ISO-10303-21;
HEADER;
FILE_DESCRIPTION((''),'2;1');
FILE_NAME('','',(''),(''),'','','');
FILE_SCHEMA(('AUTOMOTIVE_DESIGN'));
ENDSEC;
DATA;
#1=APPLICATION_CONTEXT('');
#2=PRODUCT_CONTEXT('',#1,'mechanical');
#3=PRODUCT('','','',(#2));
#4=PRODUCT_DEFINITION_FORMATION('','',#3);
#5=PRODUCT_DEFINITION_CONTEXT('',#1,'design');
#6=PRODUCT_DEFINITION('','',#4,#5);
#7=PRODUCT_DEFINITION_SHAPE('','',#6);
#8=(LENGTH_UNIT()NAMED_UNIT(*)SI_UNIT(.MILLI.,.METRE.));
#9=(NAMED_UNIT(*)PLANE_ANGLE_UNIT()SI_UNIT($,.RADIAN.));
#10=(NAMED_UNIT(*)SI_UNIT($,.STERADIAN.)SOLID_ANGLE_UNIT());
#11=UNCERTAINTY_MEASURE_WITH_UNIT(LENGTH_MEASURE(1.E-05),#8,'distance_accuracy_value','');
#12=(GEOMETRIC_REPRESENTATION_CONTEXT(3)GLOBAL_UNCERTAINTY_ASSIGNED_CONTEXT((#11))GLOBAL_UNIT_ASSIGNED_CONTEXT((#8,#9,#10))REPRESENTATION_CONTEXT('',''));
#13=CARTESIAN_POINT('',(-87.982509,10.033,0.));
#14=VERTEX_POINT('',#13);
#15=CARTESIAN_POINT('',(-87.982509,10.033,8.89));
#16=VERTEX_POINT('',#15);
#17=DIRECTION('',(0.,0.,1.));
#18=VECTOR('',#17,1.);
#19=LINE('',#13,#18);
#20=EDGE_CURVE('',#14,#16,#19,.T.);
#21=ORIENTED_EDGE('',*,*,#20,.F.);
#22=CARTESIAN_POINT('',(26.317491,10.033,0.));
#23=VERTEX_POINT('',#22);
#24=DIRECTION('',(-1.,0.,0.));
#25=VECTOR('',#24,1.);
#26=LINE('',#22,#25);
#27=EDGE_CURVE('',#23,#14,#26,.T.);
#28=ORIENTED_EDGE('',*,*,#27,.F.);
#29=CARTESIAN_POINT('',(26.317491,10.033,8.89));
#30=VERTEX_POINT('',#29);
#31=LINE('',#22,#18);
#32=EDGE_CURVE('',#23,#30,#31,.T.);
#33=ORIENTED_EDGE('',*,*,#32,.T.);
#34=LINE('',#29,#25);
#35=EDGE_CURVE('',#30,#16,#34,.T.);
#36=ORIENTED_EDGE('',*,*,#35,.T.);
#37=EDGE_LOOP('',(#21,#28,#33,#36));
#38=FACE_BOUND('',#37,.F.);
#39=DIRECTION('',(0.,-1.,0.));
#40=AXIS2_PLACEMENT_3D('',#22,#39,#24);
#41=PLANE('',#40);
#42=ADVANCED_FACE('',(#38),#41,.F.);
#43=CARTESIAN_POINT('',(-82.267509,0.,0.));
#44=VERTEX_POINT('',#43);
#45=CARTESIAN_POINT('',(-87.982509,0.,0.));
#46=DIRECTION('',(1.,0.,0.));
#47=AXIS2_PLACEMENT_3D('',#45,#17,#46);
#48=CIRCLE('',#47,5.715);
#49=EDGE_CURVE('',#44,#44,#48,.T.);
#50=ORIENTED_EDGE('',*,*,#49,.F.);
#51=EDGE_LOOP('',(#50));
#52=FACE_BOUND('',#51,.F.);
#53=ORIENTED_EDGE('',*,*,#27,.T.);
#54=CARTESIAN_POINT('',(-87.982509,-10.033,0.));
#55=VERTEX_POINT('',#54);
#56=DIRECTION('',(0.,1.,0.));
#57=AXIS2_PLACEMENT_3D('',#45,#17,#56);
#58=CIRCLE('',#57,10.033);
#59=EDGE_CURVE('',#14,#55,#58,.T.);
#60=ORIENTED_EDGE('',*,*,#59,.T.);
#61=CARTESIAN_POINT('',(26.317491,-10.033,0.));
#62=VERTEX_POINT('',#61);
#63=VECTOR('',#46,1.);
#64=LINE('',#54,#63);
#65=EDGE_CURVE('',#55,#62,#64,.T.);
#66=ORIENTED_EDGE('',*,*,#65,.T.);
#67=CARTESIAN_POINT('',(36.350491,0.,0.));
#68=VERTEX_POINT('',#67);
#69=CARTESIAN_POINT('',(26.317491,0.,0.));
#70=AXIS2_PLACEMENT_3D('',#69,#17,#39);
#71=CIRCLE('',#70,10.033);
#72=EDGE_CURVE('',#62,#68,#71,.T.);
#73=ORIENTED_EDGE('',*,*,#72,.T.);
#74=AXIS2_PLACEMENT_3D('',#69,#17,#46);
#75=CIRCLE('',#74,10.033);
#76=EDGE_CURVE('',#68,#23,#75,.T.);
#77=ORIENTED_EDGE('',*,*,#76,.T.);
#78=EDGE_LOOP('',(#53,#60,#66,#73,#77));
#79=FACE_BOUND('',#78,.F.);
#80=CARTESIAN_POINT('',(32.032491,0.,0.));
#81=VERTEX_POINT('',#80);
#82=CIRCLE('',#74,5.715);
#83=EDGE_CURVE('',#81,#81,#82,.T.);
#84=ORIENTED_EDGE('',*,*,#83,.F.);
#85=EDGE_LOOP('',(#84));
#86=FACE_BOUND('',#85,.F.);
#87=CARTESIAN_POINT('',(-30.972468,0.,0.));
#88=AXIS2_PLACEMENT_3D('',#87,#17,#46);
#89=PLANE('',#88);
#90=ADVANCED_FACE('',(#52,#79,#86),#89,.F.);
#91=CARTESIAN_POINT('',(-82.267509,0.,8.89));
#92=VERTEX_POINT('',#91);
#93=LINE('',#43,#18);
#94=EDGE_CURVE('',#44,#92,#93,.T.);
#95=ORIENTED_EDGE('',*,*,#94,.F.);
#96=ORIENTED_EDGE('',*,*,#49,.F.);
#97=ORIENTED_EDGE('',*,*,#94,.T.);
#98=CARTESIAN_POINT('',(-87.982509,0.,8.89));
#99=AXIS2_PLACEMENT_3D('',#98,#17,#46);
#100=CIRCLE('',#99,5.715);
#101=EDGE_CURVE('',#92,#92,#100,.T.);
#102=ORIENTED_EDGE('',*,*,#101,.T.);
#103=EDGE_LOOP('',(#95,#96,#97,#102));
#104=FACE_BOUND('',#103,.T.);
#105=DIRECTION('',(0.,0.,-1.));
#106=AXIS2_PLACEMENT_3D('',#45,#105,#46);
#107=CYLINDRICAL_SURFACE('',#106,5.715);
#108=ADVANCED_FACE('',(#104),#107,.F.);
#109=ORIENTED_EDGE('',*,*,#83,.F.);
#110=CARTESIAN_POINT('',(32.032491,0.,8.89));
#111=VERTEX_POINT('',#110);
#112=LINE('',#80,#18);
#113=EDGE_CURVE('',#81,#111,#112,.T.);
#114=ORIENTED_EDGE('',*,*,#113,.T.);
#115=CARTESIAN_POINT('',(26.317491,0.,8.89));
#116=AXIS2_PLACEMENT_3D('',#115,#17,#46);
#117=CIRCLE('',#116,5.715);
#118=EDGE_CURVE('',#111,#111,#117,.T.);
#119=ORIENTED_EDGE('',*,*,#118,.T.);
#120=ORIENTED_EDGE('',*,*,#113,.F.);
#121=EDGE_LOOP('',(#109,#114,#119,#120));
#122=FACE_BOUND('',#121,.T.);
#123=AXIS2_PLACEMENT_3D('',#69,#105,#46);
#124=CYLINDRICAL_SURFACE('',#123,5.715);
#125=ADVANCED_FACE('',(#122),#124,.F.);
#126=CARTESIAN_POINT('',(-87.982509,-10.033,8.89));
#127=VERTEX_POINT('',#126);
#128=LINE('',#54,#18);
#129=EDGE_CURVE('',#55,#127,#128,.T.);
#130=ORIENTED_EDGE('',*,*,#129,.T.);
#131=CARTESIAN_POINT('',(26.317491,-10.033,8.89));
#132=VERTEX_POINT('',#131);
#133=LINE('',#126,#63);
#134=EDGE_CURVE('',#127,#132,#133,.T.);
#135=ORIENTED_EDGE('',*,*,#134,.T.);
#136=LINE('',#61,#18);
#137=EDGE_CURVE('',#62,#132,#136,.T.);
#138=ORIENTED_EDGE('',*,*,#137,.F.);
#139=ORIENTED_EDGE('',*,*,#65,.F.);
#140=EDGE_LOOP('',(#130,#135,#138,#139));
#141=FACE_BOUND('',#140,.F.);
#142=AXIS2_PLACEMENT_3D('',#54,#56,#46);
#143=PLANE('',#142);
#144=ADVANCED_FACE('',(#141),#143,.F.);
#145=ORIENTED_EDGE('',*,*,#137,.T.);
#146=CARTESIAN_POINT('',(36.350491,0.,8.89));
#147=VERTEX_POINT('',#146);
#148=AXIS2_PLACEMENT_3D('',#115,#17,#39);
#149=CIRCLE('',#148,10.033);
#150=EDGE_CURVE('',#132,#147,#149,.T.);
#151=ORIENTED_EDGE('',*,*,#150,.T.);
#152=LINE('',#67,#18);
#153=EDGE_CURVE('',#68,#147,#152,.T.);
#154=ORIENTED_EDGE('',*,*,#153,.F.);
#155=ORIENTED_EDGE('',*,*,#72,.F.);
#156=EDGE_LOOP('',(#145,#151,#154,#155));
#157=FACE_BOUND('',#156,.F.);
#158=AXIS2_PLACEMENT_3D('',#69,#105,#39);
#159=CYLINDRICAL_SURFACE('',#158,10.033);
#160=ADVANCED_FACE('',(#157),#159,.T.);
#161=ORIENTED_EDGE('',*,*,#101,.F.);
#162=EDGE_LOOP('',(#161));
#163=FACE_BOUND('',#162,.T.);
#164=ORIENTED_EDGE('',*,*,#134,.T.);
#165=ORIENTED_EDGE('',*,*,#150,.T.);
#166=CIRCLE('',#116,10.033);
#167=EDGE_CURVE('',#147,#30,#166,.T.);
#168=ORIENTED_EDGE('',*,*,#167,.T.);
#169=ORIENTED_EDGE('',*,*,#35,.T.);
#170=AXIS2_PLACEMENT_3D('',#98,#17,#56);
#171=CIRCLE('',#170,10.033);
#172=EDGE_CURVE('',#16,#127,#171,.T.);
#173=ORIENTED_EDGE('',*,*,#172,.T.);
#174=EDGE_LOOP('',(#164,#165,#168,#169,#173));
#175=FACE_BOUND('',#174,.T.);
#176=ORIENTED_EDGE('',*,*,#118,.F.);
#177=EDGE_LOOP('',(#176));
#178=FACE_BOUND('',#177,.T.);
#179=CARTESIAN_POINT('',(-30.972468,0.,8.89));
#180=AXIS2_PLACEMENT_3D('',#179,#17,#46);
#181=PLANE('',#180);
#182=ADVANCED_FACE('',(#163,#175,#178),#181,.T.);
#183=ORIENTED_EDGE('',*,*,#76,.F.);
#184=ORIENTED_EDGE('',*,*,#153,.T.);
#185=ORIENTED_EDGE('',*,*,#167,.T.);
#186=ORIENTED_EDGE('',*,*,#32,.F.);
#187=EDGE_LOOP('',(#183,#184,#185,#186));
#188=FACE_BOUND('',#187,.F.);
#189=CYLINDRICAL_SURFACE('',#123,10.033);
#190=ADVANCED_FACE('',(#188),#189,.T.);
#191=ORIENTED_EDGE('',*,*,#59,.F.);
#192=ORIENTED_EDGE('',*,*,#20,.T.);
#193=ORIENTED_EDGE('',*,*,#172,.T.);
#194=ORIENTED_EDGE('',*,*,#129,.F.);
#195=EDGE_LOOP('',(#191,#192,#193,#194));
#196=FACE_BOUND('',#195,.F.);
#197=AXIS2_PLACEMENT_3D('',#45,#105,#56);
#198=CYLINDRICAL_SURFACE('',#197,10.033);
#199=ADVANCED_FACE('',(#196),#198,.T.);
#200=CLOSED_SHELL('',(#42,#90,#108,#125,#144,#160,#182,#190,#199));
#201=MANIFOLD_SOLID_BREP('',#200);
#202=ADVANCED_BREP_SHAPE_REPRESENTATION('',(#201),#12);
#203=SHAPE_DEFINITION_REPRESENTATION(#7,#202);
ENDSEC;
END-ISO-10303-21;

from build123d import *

# Parameters (mm, degrees)
F0_R     = 5.715
F1_DEPTH = 8.89


# Not quite as in the source:
# - the program builds the solid bodies; features that only make, move or delete a surface that nothing else refers to are left out


with BuildPart() as f1:
    # F0 (on Top) → F1 (new body)
    with BuildSketch(Plane.XY):
        with BuildLine():
            ThreePointArc((-87.9825091655, 10.033), (-80.8881068298, 7.0944023356), (-77.9495091655, 0))
            ThreePointArc((-77.9495091655, 0), (-80.8881068298, -7.0944023356), (-87.9825091655, -10.033))
            Line((-87.9825091655, -10.033), (26.3174908345, -10.033))
            ThreePointArc((26.3174908345, -10.033), (16.2844908345, 0), (26.3174908345, 10.033))
            Line((26.3174908345, 10.033), (-87.9825091655, 10.033))
        make_face()
        with BuildLine():
            ThreePointArc((-87.9825091655, -10.033), (-80.8881068298, -7.0944023356), (-77.9495091655, 0))
            ThreePointArc((-77.9495091655, 0), (-80.8881068298, 7.0944023356), (-87.9825091655, 10.033))
            ThreePointArc((-87.9825091655, 10.033), (-98.0155091655, 0), (-87.9825091655, -10.033))
        make_face()
        with Locations((-87.9825091655, 0)):
            Circle(F0_R, mode=Mode.SUBTRACT)
        with BuildLine():
            ThreePointArc((36.3504908345, 0), (33.4118931702, 7.0944023356), (26.3174908345, 10.033))
            ThreePointArc((26.3174908345, 10.033), (16.2844908345, 0), (26.3174908345, -10.033))
            ThreePointArc((26.3174908345, -10.033), (33.4118931702, -7.0944023356), (36.3504908345, 0))
        make_face()
        with Locations((26.3174908345, 0)):
            Circle(F0_R, mode=Mode.SUBTRACT)
    extrude(amount=F1_DEPTH)


solid = f1.part
